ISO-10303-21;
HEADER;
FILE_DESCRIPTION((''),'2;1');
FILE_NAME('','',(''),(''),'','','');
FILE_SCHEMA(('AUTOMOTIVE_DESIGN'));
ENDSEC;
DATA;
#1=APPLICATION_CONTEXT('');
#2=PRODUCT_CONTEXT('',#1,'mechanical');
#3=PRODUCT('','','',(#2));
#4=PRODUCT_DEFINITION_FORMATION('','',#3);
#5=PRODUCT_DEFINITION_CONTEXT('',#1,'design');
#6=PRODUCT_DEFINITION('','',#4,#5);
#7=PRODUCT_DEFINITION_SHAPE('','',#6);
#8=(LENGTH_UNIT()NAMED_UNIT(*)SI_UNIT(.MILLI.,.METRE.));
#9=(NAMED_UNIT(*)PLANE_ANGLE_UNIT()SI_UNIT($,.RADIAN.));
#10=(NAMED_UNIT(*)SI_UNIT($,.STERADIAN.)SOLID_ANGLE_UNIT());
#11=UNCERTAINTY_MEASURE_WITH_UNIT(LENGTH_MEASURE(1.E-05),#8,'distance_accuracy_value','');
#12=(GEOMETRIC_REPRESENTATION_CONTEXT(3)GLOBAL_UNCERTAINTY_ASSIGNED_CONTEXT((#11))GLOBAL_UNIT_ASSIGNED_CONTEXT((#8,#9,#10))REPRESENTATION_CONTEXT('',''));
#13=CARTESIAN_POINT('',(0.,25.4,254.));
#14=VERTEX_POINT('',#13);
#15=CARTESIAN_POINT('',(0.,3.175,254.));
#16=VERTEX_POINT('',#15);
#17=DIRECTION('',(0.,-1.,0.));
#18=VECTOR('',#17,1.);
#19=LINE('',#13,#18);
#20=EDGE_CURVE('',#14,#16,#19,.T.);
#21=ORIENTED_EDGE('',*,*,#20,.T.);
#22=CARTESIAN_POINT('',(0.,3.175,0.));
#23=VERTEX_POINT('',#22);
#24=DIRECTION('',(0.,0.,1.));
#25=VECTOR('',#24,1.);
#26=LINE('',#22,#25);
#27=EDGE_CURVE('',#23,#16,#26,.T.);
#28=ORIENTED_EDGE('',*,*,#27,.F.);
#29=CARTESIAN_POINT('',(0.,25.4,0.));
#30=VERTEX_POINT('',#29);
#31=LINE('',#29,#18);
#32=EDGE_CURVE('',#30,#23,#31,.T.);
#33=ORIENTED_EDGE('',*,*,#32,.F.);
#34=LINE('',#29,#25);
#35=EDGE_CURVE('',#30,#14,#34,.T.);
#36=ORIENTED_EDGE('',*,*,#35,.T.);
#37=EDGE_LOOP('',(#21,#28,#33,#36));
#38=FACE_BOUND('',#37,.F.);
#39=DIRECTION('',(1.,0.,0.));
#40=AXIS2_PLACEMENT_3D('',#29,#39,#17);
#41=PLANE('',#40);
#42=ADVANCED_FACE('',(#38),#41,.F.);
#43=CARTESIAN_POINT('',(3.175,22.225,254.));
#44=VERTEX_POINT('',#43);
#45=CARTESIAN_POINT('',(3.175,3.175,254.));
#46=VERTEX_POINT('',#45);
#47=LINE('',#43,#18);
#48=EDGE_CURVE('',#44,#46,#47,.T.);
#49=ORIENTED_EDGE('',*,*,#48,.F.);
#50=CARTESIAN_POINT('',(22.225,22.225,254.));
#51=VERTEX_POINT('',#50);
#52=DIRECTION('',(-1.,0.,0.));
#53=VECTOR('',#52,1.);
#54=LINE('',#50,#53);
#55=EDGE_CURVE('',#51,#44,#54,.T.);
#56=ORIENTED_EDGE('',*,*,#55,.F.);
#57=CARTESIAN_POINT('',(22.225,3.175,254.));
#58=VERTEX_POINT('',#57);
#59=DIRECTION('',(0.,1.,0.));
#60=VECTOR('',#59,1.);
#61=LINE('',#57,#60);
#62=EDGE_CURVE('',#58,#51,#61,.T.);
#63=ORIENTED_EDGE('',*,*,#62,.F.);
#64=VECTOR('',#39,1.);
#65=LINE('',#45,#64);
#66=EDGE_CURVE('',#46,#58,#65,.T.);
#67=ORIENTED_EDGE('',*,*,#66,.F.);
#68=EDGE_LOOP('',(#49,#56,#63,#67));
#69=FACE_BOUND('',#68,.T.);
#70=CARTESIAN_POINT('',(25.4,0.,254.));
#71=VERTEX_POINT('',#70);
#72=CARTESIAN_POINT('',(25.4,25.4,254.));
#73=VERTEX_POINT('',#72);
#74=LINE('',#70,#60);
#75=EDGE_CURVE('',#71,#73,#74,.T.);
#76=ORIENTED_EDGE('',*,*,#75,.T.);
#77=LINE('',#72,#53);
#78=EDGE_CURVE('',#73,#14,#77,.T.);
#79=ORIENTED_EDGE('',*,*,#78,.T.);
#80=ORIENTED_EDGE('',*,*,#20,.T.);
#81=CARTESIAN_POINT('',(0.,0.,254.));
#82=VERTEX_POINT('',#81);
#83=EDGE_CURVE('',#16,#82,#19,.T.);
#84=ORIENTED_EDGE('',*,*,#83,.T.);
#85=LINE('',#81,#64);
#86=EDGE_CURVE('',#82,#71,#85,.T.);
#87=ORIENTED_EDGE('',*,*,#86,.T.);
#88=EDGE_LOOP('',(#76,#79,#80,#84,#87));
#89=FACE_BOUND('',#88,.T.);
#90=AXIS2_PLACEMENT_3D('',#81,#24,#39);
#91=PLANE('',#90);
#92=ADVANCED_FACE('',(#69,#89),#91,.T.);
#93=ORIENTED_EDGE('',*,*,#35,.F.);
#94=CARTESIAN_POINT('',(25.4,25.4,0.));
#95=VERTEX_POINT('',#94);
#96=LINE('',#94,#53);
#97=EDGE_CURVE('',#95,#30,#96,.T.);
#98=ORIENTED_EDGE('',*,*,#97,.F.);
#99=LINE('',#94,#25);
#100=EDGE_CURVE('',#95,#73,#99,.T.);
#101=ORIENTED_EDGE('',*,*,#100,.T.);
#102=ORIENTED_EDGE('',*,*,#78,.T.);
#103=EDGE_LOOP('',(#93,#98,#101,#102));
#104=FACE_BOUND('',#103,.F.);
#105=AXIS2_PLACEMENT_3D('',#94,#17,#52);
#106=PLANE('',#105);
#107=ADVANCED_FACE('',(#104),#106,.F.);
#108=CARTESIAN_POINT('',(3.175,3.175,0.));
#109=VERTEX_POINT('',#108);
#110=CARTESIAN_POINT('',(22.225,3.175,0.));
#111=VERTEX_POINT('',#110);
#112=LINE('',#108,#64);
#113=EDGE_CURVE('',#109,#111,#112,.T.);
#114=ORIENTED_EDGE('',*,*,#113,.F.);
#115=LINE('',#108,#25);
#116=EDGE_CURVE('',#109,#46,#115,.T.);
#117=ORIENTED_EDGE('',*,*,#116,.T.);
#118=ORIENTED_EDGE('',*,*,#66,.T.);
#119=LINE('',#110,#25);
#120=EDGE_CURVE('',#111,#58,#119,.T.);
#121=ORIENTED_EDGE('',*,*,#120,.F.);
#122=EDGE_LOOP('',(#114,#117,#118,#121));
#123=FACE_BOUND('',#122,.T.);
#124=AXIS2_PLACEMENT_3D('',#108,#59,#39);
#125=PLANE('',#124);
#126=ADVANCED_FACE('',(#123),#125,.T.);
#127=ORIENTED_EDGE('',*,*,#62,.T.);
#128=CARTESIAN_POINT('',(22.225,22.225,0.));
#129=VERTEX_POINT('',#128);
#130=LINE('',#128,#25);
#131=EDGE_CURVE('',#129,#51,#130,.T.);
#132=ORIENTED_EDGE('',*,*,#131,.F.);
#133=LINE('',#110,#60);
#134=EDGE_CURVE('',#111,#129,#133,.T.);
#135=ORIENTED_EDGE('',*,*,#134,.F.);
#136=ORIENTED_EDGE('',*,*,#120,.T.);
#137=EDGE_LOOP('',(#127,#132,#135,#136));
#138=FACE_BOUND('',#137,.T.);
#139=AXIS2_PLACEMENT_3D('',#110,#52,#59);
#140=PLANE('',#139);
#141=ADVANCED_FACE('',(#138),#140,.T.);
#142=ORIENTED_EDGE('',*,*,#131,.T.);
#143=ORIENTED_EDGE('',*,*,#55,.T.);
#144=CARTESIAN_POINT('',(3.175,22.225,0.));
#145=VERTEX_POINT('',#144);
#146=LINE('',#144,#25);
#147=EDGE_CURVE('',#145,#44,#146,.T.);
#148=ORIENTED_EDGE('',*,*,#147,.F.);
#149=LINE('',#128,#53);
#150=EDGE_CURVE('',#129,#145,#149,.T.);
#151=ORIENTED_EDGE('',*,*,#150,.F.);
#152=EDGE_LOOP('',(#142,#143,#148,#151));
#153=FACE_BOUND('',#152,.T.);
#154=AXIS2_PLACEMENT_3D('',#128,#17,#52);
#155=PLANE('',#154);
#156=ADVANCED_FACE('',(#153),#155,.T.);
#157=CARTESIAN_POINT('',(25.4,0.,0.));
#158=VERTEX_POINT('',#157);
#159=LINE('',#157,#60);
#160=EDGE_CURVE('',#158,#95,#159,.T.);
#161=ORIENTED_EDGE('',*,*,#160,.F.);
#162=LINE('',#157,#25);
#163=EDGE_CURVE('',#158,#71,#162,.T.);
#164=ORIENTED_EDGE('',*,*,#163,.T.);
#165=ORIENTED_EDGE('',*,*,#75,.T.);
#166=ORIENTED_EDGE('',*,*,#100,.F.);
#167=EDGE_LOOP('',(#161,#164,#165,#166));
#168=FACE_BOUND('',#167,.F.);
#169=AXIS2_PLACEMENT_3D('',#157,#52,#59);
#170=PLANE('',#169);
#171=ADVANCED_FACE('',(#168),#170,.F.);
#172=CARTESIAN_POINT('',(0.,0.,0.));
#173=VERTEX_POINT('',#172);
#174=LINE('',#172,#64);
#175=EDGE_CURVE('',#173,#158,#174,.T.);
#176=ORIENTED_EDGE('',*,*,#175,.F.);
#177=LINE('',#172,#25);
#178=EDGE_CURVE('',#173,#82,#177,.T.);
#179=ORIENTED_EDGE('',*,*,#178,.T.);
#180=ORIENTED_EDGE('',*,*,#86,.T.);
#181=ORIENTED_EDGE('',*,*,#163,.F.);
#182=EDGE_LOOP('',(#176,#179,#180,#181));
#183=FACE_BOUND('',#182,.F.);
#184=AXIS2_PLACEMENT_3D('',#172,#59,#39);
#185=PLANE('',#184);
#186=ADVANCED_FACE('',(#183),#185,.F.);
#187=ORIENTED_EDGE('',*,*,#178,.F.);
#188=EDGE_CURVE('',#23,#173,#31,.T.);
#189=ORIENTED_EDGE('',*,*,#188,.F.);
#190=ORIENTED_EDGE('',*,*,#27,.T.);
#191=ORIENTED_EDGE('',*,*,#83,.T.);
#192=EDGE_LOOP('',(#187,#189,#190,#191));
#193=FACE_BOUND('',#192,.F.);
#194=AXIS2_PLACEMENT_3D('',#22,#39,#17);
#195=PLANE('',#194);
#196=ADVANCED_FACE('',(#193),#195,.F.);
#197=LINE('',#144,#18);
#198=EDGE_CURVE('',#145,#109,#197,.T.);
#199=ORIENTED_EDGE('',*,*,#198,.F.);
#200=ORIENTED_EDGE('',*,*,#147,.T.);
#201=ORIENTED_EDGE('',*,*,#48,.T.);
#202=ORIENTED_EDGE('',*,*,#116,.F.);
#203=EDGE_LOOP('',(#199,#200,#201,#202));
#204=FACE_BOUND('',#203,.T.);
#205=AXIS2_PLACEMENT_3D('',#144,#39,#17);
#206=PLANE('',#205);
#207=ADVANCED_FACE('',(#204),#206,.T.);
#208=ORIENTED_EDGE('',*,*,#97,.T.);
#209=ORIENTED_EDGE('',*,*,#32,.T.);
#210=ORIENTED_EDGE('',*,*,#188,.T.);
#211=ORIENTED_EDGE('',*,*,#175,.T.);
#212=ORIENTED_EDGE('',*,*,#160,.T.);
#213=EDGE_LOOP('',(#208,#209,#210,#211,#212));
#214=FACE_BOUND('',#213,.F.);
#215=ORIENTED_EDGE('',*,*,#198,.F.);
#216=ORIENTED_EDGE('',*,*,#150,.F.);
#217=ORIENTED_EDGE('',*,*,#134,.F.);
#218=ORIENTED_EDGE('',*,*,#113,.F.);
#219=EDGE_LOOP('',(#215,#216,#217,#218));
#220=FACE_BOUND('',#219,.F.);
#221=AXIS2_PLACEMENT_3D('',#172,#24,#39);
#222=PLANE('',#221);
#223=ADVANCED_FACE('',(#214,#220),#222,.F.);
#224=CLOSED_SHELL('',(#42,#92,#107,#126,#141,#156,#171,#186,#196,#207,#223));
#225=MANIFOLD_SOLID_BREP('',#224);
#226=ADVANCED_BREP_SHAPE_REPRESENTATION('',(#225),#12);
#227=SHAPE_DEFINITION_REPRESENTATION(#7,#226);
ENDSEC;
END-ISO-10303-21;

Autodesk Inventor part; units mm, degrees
ref_plane "YZ Plane" through (0, 0, 0) normal (1, 0, 0) x (0, 1, 0)
ref_plane "XZ Plane" through (0, 0, 0) normal (0, 1, 0) x (-1, 0, 0)
ref_plane "XY Plane" through (0, 0, 0) normal (0, 0, 1) x (1, 0, 0)
sketch "Sketch1" plane through (0, 0, 0) normal (0, 0, 1) x (1, 0, 0)
  line L0 (0, 0) -> (25.4, 0)
  line L1 (25.4, 0) -> (25.4, 25.4)
  line L2 (25.4, 25.4) -> (0, 25.4)
  line L3 (0, 25.4) -> (0, 0)
  line L4 (0, 0) -> (0, 3.175)
  line L5 (0, 3.175) -> (3.175, 3.175)
  line L6 (3.175, 3.175) -> (22.225, 3.175)
  line L7 (22.225, 3.175) -> (22.225, 22.225)
  line L8 (22.225, 22.225) -> (3.175, 22.225)
  line L9 (3.175, 22.225) -> (3.175, 3.175)
  dimension "d0" = 25.4
  dimension "d1" = 25.4
  dimension "d2" = 3.175
  dimension "d3" = 3.175
  dimension "d4" = 19.05
  dimension "d5" = 19.05
extrude "Extrusion1" add sketch "Sketch1" along normal blind 254
properties part number "10inSquarePipe"
